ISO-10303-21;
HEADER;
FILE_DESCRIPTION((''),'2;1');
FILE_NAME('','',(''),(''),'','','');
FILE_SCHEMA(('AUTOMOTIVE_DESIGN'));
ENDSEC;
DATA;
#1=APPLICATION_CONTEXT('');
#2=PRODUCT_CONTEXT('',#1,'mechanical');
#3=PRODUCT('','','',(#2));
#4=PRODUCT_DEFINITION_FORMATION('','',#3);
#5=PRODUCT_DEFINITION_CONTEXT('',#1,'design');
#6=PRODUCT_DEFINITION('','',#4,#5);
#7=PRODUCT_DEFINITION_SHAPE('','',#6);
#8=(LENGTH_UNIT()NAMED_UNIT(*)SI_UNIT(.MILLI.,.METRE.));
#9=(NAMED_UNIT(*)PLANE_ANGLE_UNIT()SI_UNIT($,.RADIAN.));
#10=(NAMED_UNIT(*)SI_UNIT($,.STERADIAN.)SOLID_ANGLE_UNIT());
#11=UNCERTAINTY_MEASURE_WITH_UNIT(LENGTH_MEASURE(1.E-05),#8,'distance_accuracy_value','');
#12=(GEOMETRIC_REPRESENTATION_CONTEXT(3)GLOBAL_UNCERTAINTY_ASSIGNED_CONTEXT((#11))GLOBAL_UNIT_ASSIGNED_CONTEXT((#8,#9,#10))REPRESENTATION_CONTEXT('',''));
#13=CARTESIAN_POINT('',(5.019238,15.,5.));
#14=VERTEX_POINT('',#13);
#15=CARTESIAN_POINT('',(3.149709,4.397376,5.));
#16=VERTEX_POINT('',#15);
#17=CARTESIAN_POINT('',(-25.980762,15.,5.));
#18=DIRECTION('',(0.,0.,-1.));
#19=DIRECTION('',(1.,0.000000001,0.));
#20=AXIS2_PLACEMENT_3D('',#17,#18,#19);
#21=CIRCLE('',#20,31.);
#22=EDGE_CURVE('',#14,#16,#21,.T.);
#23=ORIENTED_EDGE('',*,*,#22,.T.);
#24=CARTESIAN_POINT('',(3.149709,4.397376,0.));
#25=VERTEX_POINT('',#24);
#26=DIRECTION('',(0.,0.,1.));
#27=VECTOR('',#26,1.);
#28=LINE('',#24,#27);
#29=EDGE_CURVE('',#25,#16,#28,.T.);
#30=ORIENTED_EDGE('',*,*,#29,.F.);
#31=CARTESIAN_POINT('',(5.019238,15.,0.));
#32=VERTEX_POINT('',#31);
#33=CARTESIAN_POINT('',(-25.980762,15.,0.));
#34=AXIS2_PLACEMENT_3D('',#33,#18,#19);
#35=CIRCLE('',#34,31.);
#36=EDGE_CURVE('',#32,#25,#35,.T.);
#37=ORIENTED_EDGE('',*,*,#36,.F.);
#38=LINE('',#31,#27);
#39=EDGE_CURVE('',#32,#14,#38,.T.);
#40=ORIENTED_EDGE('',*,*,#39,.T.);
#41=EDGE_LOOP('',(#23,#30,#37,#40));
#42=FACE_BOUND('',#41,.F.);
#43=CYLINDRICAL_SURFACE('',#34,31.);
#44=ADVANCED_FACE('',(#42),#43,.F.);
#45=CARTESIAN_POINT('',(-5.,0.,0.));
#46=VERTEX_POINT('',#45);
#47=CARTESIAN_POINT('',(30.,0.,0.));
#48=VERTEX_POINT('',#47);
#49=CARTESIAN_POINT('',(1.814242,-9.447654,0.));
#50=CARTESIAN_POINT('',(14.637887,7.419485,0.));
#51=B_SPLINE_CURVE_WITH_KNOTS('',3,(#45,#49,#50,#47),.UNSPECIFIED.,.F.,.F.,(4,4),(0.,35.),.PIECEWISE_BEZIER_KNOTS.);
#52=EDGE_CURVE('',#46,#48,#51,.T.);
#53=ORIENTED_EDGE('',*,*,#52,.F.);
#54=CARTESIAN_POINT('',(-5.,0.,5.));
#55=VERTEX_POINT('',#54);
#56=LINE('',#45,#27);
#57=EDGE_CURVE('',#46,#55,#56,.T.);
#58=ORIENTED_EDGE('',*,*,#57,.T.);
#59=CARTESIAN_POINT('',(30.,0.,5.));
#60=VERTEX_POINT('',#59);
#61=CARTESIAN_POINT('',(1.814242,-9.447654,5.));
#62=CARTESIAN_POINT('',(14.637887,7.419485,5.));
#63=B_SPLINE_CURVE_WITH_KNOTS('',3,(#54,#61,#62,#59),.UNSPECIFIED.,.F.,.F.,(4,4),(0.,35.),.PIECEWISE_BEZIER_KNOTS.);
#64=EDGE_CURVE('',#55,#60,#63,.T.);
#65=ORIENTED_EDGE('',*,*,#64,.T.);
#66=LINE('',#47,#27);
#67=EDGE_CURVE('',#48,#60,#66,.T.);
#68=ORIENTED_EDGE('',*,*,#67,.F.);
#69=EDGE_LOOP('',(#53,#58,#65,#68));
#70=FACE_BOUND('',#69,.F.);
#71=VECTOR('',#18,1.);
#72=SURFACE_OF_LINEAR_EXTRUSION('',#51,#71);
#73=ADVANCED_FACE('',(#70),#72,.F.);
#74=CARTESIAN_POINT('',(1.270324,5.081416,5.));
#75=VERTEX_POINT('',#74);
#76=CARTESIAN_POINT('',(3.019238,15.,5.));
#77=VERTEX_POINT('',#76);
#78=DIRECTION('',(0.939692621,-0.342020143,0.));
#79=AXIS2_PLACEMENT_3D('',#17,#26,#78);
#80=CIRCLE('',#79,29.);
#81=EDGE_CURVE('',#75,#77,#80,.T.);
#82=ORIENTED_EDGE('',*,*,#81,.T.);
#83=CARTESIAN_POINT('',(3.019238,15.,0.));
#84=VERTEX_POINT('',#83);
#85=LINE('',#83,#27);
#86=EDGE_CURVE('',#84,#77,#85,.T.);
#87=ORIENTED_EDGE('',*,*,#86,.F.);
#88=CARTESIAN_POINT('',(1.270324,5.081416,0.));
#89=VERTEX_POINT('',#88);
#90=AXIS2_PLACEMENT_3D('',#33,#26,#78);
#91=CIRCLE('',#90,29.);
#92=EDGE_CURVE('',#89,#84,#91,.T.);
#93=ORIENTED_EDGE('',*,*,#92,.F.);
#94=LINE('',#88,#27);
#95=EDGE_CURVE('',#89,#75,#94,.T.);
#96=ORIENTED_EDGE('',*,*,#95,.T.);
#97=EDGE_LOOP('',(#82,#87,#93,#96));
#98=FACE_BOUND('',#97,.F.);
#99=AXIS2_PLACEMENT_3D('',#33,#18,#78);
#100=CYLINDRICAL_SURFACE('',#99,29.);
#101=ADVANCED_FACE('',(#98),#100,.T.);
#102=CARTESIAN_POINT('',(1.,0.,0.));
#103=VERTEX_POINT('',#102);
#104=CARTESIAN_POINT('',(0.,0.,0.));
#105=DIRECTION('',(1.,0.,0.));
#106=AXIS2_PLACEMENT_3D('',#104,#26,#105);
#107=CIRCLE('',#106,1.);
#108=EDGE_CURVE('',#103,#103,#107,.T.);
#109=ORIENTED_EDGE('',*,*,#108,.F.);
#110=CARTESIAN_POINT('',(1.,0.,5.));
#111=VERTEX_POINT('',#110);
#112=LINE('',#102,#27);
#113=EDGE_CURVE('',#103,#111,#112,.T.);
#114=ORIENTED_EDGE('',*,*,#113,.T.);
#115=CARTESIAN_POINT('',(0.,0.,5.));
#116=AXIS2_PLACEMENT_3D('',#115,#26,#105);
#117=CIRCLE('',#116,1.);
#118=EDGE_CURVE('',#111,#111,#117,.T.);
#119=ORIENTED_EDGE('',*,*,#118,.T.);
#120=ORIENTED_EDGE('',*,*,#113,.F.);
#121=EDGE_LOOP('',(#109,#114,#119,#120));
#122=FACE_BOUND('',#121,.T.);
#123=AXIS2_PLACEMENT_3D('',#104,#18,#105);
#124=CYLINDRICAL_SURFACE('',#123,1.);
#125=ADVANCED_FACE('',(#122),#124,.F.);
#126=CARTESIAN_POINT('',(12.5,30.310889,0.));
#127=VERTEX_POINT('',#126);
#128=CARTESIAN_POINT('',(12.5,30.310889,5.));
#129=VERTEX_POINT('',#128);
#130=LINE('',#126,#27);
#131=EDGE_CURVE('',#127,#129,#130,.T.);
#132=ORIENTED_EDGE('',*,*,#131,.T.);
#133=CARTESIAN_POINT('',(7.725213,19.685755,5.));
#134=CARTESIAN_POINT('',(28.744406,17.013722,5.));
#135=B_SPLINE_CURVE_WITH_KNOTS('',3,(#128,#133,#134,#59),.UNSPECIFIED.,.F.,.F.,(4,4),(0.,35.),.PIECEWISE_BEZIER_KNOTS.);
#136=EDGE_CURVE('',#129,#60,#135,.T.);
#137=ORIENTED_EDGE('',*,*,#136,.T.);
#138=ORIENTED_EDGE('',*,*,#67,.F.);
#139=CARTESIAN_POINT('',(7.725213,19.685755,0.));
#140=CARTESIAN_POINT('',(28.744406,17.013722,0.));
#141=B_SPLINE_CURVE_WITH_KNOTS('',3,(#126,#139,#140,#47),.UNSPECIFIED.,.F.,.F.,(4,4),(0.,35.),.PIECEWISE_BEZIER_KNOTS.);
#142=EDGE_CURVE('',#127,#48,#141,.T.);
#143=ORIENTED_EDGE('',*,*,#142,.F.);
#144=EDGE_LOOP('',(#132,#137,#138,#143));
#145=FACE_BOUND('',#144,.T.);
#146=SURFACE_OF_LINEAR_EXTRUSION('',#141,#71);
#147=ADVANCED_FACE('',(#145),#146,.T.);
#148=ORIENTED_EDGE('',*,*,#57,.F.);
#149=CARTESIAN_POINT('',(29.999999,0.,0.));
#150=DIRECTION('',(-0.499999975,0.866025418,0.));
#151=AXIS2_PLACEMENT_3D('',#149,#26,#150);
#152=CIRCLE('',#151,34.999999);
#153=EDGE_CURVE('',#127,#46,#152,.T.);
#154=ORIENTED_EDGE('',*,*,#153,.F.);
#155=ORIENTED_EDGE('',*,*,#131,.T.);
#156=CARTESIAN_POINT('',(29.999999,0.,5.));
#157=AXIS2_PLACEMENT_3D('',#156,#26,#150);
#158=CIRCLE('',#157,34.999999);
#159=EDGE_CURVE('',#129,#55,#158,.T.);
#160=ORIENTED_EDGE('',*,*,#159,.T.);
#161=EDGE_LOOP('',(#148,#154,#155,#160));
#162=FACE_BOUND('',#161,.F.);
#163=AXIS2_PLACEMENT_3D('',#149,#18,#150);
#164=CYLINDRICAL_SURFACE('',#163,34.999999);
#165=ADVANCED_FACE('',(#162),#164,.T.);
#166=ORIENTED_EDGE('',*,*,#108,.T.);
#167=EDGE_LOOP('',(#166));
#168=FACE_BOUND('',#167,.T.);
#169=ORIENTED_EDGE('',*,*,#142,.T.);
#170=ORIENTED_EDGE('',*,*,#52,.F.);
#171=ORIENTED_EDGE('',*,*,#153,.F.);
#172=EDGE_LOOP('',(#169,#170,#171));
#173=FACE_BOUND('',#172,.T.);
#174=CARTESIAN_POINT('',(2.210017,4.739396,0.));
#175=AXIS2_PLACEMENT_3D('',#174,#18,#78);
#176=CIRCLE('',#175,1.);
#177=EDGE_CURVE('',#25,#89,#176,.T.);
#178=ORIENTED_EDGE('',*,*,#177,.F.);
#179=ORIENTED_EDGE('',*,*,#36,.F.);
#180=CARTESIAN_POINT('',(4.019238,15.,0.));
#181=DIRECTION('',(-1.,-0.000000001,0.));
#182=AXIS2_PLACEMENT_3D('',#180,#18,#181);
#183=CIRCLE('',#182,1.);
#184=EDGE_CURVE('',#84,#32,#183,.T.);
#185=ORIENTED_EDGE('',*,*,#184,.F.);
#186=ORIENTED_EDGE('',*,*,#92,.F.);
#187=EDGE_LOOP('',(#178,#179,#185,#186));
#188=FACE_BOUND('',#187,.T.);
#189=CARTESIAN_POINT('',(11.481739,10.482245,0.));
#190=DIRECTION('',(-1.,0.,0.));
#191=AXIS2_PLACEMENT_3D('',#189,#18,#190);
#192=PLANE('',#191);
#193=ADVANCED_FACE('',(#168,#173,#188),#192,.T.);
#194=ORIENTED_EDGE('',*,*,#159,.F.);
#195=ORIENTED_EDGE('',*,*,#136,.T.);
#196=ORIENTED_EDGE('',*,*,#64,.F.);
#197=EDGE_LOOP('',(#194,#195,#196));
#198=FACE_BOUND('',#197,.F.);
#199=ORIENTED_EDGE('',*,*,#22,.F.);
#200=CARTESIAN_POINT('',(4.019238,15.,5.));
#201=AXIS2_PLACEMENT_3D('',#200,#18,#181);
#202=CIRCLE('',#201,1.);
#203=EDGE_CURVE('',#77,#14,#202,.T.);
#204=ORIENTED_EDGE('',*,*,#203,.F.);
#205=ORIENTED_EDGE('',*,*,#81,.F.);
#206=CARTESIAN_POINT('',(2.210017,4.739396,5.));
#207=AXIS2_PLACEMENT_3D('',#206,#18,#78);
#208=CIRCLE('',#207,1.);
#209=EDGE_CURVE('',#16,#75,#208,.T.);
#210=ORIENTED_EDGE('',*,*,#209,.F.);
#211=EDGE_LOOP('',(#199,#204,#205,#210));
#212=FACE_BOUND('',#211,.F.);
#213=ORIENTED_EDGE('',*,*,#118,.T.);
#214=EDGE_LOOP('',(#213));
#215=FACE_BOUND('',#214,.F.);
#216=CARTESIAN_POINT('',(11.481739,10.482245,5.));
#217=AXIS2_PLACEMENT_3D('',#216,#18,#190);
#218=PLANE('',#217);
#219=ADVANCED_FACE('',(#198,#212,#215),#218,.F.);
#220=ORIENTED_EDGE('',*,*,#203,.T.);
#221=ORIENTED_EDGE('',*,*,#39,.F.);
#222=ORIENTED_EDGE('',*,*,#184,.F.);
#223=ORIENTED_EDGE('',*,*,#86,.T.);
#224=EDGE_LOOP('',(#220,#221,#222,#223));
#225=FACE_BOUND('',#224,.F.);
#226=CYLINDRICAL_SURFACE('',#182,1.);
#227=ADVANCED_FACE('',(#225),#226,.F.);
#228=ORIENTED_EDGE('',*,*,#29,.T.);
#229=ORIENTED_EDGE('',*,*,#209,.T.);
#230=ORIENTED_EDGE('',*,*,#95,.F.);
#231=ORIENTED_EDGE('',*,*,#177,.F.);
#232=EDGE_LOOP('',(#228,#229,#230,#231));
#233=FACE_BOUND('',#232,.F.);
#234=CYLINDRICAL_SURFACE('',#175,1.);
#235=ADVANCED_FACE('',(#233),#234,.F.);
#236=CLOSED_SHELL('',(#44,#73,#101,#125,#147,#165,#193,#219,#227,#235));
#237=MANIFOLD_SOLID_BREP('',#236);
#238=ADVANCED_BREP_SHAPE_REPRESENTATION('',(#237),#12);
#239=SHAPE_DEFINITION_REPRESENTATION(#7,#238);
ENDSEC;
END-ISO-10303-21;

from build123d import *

# Parameters (mm, degrees)
F0_R     = 1
F1_DEPTH = 5


# Not quite as in the source:
# - ends of sketch curves that miss each other by under 0.0002 mm in the source are joined


with BuildPart() as f1:
    # F0 (on Top) → F1 (new body)
    with BuildSketch(Plane.XY):
        with BuildLine():
            add(Edge.make_bspline(
                [(12.5000001863, 30.3108888098), (7.72521306, 19.685755152), (28.7444061302, 17.0137217111), (30.0000001863, -3.226e-07)],
                knots=[0, 0, 0, 0, 35, 35, 35, 35], degree=3))
            ThreePointArc((12.5000001863, 30.3108888098), (-0.3108891325, 17.5), (-5, 0))
            add(Edge.make_bspline(
                [(-5, 0), (1.8142421031, -9.4476537779), (14.6378874779, 7.4194846675), (30.0000001863, -3.226e-07)],
                knots=[0, 0, 0, 0, 35, 35, 35, 35], degree=3))
        make_face()
        Circle(F0_R, mode=Mode.SUBTRACT)
        with BuildLine():
            ThreePointArc((3.1497091277, 4.3973755592), (1.867996364, 3.7997030808), (1.2703238856, 5.0814158445))
            ThreePointArc((1.2703238856, 5.0814158445), (2.5786627167, 9.9642028495), (3.0192378757, 15.0000000022))
            ThreePointArc((3.0192378757, 15.0000000022), (4.019237875, 16.0000000029), (5.0192378757, 15.0000000036))
            ThreePointArc((5.0192378757, 15.0000000036), (4.548278223, 9.6169064956), (3.1497091277, 4.3973755592))
        make_face(mode=Mode.SUBTRACT)
    extrude(amount=F1_DEPTH)


solid = f1.part
